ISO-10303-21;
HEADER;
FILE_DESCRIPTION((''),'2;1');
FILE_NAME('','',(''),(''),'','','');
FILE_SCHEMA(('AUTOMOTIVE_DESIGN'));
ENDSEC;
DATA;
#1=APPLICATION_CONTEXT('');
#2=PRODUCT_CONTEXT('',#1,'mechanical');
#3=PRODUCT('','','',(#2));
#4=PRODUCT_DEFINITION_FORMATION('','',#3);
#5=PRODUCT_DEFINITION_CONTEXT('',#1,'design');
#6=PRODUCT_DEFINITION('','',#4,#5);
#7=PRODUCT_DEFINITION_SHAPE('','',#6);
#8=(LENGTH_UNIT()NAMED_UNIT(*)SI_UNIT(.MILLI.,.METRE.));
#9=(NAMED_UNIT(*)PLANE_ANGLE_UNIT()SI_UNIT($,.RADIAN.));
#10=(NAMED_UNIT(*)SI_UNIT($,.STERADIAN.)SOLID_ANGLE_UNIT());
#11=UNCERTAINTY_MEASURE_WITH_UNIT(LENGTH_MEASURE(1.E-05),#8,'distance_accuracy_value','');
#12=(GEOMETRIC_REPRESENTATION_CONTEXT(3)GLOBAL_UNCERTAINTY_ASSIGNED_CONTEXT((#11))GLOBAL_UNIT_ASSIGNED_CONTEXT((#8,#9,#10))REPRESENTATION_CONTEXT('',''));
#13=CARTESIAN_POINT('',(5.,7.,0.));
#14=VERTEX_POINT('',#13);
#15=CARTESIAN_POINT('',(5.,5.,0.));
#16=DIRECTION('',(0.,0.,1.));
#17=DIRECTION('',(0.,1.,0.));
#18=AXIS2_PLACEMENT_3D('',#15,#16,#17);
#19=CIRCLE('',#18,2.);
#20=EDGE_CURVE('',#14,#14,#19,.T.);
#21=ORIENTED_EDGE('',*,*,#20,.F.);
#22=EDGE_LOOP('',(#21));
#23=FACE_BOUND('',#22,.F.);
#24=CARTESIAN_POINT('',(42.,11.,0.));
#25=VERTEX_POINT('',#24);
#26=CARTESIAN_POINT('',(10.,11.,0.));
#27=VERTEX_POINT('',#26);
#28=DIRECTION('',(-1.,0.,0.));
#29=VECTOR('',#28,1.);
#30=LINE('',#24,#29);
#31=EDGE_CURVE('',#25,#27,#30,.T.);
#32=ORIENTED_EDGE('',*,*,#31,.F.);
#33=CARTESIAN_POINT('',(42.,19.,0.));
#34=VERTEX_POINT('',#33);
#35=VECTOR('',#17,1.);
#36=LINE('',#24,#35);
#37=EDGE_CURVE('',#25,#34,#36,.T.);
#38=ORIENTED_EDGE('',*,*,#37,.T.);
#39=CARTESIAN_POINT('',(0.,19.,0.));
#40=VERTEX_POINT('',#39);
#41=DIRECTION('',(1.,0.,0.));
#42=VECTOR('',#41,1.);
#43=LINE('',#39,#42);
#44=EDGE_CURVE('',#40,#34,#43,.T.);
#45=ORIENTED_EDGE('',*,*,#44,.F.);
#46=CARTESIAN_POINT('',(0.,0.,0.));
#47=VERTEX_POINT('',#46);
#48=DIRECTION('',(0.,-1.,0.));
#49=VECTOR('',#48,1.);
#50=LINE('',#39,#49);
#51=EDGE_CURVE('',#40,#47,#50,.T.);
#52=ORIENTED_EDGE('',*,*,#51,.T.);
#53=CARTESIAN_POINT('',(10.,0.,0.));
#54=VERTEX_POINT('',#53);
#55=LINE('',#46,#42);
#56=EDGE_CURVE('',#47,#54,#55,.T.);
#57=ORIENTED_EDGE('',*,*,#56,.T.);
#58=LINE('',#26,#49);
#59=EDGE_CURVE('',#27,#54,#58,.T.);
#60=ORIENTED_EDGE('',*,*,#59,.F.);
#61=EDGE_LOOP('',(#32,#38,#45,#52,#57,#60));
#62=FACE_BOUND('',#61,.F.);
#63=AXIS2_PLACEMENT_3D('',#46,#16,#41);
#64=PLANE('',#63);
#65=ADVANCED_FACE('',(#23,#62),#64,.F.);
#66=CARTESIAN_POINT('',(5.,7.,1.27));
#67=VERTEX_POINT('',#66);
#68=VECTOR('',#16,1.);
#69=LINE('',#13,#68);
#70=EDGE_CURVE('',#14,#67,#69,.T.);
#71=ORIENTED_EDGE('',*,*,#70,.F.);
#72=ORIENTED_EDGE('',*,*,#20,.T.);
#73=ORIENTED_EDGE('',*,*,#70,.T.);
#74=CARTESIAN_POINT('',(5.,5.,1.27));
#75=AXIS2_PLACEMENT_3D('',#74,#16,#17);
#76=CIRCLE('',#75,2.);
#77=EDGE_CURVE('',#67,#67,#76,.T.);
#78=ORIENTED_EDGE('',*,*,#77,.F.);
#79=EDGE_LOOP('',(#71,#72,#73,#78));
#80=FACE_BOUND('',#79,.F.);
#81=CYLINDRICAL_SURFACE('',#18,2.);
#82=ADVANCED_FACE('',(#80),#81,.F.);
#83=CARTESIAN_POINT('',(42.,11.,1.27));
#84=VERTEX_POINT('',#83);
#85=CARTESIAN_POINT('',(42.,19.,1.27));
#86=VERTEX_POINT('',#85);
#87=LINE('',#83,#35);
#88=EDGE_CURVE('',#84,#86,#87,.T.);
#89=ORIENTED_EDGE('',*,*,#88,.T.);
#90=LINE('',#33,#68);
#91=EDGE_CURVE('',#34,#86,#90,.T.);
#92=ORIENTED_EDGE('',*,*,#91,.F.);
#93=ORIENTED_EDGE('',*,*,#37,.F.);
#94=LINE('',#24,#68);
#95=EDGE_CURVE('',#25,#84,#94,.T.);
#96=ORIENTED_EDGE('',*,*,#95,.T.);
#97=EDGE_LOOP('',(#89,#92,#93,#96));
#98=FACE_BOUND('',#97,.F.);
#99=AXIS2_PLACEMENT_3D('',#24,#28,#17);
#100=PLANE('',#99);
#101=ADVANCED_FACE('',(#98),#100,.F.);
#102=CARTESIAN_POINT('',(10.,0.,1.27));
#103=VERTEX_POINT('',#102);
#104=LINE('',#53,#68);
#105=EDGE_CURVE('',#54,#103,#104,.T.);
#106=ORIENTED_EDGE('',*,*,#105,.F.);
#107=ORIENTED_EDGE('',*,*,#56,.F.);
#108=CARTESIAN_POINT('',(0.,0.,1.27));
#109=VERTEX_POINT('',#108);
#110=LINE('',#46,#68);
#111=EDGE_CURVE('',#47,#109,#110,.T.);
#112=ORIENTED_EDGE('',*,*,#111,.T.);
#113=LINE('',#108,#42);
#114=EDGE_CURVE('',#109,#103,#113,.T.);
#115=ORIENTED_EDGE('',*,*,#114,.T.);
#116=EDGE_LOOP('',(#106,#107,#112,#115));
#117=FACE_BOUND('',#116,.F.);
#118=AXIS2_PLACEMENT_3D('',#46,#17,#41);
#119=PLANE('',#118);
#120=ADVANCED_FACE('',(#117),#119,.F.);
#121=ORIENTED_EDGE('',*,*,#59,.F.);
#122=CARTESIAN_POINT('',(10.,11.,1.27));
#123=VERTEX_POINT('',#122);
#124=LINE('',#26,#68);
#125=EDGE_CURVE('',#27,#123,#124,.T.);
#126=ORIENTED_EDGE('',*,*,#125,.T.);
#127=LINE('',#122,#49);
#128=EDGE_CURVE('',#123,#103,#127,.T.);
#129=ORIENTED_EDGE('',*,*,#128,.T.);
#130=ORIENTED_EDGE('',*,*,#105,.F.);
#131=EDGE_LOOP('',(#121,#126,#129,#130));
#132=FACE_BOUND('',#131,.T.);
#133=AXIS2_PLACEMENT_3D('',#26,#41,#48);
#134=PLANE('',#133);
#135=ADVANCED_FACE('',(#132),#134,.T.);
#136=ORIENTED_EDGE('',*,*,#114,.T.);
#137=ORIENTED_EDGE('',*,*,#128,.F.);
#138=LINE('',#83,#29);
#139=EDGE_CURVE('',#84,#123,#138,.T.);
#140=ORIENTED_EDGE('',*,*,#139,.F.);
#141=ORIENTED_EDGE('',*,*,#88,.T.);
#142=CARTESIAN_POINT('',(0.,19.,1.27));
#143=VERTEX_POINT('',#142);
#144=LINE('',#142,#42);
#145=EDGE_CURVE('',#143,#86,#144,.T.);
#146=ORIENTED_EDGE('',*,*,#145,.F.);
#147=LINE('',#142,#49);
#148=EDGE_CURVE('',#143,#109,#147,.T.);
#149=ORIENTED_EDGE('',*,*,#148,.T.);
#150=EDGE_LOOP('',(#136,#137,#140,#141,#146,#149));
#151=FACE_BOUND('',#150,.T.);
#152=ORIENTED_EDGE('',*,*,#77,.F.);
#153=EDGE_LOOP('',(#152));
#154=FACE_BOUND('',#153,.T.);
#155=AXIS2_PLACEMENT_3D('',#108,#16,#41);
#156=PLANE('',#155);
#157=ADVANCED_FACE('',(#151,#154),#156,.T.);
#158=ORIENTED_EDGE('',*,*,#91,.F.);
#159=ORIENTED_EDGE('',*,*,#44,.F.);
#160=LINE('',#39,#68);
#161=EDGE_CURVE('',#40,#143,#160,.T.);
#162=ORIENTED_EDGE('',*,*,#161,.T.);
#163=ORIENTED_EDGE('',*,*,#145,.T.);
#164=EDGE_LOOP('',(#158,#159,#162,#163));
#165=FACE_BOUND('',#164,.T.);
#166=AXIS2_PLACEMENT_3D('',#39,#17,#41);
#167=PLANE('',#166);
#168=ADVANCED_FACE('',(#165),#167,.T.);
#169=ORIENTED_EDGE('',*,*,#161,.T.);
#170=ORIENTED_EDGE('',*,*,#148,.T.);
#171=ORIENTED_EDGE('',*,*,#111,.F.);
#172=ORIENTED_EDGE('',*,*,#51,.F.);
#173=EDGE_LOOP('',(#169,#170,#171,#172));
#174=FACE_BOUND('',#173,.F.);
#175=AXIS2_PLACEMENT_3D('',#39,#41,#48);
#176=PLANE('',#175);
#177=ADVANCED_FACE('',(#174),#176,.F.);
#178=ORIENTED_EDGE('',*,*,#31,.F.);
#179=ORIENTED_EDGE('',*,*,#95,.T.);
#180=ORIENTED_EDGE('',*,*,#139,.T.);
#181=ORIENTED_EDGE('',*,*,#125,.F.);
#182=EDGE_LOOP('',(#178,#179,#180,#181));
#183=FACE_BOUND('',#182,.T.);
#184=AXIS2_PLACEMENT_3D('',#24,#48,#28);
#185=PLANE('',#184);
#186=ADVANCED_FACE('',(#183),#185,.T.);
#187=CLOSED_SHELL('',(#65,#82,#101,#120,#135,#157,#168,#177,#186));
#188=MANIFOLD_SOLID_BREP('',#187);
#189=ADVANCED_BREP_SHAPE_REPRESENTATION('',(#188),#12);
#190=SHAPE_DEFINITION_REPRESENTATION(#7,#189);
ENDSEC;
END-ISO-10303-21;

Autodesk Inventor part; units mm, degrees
ref_plane "YZ Plane" through (0, 0, 0) normal (1, 0, 0) x (0, 1, 0)
ref_plane "XZ Plane" through (0, 0, 0) normal (0, 1, 0) x (-1, 0, 0)
ref_plane "XY Plane" through (0, 0, 0) normal (0, 0, 1) x (1, 0, 0)
sketch "Sketch1" plane through (0, 0, 0) normal (0, 0, 1) x (1, 0, 0)
  line L0 (0, 0) -> (10, 0)
  line L1 (0, 19) -> (42, 19)
  line L2 (10, 11) -> (10, 0)
  line L3 (42, 11) -> (10, 11)
  line L4 (0, 19) -> (0, 0)
  line L5 (42, 11) -> (42, 19)
extrude "Extrusion1" add sketch "Sketch1" along normal blind 1.27
sketch "Sketch2" plane through (0, 0, 0) normal (0, 0, 1) x (1, 0, 0)
  point P0 (5, 5)
hole "Hole1" at (5, 5, 0) direction (0, 0, 1) diameter 4 depth 1.27
properties part number "Spreader Flag" material "ABS Plastic"
